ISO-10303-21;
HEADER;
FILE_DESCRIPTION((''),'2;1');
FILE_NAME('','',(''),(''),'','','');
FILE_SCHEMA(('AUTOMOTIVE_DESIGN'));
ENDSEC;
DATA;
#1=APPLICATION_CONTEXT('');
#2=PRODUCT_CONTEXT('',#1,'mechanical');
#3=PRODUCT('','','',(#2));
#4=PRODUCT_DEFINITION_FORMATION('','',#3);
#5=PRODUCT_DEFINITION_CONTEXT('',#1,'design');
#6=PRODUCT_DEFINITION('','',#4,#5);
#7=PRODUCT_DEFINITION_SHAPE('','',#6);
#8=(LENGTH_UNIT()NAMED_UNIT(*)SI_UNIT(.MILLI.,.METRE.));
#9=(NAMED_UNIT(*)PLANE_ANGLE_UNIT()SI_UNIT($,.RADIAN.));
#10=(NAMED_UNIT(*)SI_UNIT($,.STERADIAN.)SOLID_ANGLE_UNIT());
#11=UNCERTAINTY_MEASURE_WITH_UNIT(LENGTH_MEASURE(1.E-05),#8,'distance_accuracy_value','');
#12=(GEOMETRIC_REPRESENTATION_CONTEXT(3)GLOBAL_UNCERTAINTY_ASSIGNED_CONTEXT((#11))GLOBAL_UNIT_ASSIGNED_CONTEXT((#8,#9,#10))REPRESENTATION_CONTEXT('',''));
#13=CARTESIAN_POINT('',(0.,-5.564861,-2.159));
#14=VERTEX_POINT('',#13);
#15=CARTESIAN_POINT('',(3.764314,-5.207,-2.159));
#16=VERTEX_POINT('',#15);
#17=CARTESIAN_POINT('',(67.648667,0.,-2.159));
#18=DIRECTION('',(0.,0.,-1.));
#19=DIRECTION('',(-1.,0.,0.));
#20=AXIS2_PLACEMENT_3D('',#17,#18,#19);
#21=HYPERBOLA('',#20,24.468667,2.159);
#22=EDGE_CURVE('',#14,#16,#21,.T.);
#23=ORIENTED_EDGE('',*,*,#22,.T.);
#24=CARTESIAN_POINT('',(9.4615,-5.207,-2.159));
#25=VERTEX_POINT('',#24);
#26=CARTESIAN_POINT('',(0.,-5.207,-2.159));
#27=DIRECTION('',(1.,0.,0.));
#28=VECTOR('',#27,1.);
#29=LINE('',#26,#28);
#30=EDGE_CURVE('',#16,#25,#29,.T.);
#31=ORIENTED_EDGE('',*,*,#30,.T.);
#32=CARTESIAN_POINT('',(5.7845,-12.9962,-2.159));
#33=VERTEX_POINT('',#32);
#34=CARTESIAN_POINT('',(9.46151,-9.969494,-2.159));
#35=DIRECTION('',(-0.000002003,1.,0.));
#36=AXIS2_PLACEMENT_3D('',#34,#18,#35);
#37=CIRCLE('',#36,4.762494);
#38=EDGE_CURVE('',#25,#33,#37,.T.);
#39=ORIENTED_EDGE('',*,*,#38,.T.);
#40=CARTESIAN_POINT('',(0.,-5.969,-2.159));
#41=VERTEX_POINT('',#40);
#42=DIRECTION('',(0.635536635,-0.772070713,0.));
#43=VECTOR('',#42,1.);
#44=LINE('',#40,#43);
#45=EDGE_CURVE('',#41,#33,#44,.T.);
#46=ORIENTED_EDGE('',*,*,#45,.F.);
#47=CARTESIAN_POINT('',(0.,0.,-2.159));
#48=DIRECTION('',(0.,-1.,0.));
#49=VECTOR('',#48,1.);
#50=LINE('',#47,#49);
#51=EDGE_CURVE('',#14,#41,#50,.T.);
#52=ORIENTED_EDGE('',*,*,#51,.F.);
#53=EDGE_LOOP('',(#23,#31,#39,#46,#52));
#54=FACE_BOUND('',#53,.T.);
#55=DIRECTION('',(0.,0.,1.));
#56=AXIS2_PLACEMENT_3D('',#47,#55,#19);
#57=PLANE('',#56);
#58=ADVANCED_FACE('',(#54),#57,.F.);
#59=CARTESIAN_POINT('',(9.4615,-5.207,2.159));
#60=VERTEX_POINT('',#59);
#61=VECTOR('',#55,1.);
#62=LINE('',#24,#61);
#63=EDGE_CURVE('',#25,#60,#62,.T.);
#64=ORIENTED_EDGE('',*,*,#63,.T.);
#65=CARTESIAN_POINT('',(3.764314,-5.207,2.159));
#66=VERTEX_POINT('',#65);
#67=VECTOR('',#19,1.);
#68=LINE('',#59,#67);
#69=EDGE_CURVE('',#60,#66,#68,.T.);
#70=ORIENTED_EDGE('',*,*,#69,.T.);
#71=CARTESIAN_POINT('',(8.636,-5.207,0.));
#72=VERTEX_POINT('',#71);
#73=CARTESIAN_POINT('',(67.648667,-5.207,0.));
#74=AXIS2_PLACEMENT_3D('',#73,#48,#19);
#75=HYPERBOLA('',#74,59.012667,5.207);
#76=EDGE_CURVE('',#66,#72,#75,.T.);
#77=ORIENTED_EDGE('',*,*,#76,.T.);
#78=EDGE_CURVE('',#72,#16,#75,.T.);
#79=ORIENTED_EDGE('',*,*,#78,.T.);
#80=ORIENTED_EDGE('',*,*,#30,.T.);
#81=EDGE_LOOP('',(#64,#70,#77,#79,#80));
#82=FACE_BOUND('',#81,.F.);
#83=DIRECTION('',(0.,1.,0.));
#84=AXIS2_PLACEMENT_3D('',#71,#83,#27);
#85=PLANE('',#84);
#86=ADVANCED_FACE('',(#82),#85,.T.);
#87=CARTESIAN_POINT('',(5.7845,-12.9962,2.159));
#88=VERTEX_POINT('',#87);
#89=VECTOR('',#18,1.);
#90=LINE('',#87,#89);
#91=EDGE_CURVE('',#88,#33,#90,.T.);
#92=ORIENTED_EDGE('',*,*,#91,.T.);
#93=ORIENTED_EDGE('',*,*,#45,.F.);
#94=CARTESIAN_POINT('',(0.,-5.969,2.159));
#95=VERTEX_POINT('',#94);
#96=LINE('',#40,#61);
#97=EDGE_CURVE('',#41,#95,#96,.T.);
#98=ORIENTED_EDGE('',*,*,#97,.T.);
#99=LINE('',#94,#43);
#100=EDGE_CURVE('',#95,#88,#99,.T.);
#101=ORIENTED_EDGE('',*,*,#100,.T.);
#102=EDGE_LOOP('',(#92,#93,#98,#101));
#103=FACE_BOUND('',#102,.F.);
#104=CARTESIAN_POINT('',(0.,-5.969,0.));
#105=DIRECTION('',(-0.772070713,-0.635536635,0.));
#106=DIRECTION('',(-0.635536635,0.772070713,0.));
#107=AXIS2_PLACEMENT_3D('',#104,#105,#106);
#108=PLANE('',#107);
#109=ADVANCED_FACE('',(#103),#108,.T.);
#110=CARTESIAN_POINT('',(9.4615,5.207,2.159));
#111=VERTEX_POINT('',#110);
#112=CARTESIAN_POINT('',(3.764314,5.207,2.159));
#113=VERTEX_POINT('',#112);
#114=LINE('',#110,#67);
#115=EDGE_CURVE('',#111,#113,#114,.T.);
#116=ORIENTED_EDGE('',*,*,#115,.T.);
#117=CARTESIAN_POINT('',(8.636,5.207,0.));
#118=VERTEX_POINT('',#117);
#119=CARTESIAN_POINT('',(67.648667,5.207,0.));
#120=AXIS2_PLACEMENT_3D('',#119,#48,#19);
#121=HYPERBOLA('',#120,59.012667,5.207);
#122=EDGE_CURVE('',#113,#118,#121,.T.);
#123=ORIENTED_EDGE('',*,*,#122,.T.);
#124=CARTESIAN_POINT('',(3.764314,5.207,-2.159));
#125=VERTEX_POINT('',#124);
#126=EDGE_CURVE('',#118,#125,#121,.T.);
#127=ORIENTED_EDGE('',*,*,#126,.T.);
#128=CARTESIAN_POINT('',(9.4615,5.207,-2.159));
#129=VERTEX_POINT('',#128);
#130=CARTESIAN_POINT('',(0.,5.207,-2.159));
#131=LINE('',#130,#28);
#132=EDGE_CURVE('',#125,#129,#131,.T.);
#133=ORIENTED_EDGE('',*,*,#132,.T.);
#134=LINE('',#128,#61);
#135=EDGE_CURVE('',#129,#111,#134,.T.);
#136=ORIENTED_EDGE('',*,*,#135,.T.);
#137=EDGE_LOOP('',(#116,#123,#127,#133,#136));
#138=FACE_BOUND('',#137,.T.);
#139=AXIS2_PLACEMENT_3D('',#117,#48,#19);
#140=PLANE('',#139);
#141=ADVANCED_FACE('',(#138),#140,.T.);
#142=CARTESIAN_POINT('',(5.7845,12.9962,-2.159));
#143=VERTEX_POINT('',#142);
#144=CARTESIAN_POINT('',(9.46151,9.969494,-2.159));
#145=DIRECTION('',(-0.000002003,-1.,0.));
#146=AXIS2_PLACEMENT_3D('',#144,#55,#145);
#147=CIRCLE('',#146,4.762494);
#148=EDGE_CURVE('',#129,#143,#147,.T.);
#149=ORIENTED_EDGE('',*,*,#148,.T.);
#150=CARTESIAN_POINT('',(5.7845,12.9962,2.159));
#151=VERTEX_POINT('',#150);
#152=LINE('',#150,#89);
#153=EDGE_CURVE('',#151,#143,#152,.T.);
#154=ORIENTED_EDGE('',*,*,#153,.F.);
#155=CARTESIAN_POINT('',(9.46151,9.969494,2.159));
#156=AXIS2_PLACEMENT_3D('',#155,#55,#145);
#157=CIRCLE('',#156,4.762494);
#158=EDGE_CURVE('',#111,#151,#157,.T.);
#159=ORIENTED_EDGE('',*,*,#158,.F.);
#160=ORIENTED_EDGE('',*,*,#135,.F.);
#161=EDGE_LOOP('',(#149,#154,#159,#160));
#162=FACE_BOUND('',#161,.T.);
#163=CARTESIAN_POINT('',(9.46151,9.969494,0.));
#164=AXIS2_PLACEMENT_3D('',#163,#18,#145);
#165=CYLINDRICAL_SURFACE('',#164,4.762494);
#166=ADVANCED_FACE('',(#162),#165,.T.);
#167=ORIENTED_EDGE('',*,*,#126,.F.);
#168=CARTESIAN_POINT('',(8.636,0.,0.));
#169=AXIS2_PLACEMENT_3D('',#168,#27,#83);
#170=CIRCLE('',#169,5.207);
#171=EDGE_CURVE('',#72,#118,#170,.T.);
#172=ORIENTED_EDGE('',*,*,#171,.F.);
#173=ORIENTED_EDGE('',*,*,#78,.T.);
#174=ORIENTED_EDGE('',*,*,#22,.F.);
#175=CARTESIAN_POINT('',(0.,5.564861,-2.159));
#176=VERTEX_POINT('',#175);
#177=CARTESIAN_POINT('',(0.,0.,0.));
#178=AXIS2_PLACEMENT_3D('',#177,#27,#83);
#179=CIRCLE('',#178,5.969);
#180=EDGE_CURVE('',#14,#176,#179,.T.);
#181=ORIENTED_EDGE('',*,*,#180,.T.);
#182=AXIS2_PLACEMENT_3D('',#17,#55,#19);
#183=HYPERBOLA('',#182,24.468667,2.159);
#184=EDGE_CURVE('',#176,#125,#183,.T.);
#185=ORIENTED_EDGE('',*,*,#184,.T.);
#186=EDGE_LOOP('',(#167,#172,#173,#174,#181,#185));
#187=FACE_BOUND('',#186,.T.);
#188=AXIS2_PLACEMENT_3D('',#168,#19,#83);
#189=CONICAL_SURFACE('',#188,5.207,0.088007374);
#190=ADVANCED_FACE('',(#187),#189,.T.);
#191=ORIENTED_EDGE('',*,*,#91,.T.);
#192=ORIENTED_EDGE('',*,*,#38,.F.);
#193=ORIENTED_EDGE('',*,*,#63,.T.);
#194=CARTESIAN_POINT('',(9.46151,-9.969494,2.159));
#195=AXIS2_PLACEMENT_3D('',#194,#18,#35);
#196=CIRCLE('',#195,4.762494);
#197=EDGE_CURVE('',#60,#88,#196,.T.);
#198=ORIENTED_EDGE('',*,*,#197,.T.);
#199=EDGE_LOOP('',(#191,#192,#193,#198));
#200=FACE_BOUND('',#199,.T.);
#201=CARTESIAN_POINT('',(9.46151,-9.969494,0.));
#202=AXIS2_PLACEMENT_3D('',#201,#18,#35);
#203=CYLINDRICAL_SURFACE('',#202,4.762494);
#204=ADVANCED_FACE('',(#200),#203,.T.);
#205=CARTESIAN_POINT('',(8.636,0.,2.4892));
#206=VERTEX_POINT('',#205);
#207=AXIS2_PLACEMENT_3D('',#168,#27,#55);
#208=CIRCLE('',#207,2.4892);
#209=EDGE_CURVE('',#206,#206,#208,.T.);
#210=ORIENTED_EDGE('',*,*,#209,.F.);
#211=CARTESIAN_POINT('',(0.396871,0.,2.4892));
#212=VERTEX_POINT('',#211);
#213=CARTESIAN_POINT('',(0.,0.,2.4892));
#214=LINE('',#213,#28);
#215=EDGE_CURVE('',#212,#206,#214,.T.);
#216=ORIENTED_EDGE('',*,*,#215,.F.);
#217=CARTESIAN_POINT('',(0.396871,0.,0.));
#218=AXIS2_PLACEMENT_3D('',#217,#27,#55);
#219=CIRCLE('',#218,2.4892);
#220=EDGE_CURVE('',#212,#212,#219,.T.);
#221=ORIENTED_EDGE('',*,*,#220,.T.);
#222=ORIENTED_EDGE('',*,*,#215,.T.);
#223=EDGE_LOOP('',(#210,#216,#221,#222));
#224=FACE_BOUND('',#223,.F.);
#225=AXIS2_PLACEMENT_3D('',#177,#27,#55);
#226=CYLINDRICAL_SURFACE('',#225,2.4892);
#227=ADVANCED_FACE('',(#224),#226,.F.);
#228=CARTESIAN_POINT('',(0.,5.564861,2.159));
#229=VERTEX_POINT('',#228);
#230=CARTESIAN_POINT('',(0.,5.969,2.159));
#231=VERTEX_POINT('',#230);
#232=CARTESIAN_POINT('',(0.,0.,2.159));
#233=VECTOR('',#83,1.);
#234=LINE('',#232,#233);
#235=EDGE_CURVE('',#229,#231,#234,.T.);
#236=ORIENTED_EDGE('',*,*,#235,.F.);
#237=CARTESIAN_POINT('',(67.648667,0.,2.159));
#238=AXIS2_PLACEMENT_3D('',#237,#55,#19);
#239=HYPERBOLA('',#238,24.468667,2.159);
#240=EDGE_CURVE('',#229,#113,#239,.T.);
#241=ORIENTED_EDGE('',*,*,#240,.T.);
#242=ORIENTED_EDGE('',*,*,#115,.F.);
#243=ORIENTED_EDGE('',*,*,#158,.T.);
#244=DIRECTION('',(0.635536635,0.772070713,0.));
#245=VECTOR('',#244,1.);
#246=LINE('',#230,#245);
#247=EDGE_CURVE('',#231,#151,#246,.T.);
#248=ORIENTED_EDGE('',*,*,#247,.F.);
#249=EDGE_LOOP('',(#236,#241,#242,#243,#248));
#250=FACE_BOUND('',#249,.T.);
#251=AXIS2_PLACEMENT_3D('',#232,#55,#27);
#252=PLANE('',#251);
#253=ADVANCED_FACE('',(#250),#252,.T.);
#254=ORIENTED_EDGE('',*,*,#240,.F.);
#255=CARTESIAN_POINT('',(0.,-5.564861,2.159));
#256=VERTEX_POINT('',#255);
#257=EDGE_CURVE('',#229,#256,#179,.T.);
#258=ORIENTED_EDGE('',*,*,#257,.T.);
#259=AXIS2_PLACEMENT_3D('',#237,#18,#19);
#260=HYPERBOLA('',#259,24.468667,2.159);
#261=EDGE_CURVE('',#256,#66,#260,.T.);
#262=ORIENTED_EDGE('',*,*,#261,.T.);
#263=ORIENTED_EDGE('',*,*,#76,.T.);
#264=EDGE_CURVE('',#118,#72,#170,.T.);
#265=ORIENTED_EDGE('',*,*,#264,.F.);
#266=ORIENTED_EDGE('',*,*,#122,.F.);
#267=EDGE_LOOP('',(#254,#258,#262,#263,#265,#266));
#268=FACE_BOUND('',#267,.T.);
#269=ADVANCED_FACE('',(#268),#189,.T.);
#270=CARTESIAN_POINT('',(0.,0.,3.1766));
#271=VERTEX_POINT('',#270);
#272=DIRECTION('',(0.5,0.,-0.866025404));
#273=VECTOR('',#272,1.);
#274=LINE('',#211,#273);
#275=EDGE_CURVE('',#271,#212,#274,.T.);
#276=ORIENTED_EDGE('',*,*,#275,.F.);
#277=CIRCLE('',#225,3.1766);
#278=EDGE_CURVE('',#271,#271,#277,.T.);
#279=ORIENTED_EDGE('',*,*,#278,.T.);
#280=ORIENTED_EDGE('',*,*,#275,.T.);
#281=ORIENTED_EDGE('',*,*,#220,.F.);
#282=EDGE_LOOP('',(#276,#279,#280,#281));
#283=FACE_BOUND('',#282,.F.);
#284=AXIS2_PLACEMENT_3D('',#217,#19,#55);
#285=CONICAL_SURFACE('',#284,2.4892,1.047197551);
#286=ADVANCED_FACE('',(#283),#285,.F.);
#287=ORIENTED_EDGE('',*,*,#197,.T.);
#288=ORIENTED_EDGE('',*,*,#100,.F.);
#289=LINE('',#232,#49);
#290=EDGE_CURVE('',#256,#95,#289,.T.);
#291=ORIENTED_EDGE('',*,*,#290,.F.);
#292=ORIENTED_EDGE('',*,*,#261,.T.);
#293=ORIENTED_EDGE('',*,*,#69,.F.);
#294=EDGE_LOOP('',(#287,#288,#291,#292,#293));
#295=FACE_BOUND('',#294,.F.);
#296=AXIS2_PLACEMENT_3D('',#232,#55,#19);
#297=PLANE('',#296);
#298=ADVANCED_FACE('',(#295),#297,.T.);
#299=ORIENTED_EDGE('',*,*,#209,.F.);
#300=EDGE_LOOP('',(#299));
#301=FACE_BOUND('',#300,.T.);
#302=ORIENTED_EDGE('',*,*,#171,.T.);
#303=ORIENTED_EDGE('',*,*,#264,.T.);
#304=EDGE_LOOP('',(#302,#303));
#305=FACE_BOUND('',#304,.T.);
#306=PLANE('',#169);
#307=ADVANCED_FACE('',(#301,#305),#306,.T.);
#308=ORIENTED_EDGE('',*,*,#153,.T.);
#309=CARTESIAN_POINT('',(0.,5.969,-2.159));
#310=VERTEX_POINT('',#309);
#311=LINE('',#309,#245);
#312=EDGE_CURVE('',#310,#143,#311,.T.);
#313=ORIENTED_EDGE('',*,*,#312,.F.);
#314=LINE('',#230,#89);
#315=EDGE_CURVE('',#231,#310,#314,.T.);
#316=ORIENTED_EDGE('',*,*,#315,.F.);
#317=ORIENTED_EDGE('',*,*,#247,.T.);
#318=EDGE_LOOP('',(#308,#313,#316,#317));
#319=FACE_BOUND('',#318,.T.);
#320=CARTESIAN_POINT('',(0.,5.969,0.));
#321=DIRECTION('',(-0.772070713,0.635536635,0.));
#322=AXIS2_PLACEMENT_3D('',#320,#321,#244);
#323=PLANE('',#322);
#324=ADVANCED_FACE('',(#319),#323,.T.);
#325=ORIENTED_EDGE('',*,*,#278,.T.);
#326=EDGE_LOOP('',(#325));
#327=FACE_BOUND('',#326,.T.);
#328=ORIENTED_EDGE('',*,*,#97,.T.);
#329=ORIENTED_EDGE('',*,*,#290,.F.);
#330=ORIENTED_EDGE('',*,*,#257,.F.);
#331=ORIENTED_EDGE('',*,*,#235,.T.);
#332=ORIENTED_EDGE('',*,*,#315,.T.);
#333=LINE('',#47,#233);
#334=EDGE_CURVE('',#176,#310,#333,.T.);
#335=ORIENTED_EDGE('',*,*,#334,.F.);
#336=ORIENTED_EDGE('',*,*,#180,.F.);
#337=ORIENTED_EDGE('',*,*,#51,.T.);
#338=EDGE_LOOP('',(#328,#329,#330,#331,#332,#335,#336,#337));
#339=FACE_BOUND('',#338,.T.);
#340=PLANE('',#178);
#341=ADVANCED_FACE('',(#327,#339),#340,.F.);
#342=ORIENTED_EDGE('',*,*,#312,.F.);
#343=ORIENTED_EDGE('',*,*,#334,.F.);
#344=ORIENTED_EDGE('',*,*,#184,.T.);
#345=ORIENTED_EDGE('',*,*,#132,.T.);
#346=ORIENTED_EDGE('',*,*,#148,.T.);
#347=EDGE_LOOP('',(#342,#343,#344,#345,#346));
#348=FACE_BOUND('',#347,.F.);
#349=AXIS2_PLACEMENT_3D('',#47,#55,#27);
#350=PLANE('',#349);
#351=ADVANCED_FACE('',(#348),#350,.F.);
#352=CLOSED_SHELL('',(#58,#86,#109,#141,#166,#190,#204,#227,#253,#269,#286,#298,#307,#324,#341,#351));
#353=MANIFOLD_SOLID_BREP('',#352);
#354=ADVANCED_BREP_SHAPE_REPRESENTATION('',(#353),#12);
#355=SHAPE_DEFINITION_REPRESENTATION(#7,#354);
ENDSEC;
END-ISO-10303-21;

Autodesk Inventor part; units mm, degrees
ref_plane "YZ Plane" through (0, 0, 0) normal (1, 0, 0) x (0, 1, 0)
ref_plane "XZ Plane" through (0, 0, 0) normal (0, 1, 0) x (-1, 0, 0)
sketch "Sketch1" plane through (0, 0, 0) normal (0, 0, 1) x (1, 0, 0)
  line L0 (0, 0) -> (8.636, 0)
  line L1 (0, 0) -> (0, 5.969)
  line L2 (8.636, 5.207) -> (8.636, 0)
  line L3 (0, 5.969) -> (5.7845, 12.9962)
  line L4 (8.636, 5.207) -> (9.4615, 5.207)
  arc A0 (9.4615, 5.207) -> (5.7845, 12.9962) centre (9.4615, 9.9695) ccw
  line L5 (8.636, 5.207) -> (0, 5.969)
  line L6 (8.636, 5.207) -> (0, 5.207)
  dimension "d0" = 10.414
  dimension "d1" = 9.4615
  dimension "d2" = 9.9695
  dimension "d3" = 4.7625
  dimension "d4" = 8.636
  dimension "d5" = 11.938
revolve "Body" add sketch "Sketch1" angle 360 about axis through (0, 0, 0) along (1, 0, 0) contours L1 L6 L2 L0 | L1 L5 L6
extrude "Wing1" add sketch "Sketch1" along normal mid plane 4.318 contours L1 L5 L6 | L5 L3 A0 L4
fillet "Fillet1" [suppressed]
mirror "Wing2" about plane through (0, 0, 0) normal (0, 1, 0) of "Wing1"
sketch "Sketch2" plane through (0, 0, 0) normal (1, 0, 0) x (0, 1, 0)
  line L0 (0, -14) -> (0, 14) projected
  line L1 (-14, 0) -> (14, 0) projected
  point P0 (0, 0)
hole "Thread" at (0, 0, 0) direction (1, 0, 0) diameter 4.9784 end through all thread size "1/4-20 UNC" class "2B" standard "ANSI Unified Screw Threads"
chamfer "Chamfer1" distance 0.6874 angle 30 1 edges at (0, 0, -2.4892) measured on face at (0, -4.5336, 0.1)
ref_plane "Work Plane1" through (34.8277, 0, 0) normal (0, 0, -1) x (1, 0, 0)
equation "\"d0\" = KOD2"
equation "\"d1\" = KOH1 - RR"
equation "\"d2\" = 0.5 * E0 - RR"
equation "\"d3\" = RR"
equation "\"d4\" = KOH"
equation "\"d5\" = KOD"
equation "\"d6\" = SW"
equation "\"d8\" = 0.333333 * SW"
equation "\"d9\" = -0.5 * GD1 + 0.5 * NND"
equation "\"d109\" = -0.5 * GD1 + 0.5 * NND"
equation "\"NND\" = 6.35"
equation "\"KOH\" = 8.636"
equation "\"KOH1\" = 14.224"
equation "\"SW\" = 4.318"
equation "\"KOD\" = 11.938"
equation "\"KOD2\" = 10.414"
equation "\"RR\" = 4.7625"
equation "\"E0\" = 29.464"
equation "\"THREADDIA\" = 6.35"
equation "\"TOA\" = 30deg"
equation "\"RR2\" = 1.905"
equation "\"SW1\" = SW"
equation "\"GD1\" = 4.975185"
properties part number "ANSI B18.17 - 1/4 - 20, TBS1WNI" material "Steel, Mild"
